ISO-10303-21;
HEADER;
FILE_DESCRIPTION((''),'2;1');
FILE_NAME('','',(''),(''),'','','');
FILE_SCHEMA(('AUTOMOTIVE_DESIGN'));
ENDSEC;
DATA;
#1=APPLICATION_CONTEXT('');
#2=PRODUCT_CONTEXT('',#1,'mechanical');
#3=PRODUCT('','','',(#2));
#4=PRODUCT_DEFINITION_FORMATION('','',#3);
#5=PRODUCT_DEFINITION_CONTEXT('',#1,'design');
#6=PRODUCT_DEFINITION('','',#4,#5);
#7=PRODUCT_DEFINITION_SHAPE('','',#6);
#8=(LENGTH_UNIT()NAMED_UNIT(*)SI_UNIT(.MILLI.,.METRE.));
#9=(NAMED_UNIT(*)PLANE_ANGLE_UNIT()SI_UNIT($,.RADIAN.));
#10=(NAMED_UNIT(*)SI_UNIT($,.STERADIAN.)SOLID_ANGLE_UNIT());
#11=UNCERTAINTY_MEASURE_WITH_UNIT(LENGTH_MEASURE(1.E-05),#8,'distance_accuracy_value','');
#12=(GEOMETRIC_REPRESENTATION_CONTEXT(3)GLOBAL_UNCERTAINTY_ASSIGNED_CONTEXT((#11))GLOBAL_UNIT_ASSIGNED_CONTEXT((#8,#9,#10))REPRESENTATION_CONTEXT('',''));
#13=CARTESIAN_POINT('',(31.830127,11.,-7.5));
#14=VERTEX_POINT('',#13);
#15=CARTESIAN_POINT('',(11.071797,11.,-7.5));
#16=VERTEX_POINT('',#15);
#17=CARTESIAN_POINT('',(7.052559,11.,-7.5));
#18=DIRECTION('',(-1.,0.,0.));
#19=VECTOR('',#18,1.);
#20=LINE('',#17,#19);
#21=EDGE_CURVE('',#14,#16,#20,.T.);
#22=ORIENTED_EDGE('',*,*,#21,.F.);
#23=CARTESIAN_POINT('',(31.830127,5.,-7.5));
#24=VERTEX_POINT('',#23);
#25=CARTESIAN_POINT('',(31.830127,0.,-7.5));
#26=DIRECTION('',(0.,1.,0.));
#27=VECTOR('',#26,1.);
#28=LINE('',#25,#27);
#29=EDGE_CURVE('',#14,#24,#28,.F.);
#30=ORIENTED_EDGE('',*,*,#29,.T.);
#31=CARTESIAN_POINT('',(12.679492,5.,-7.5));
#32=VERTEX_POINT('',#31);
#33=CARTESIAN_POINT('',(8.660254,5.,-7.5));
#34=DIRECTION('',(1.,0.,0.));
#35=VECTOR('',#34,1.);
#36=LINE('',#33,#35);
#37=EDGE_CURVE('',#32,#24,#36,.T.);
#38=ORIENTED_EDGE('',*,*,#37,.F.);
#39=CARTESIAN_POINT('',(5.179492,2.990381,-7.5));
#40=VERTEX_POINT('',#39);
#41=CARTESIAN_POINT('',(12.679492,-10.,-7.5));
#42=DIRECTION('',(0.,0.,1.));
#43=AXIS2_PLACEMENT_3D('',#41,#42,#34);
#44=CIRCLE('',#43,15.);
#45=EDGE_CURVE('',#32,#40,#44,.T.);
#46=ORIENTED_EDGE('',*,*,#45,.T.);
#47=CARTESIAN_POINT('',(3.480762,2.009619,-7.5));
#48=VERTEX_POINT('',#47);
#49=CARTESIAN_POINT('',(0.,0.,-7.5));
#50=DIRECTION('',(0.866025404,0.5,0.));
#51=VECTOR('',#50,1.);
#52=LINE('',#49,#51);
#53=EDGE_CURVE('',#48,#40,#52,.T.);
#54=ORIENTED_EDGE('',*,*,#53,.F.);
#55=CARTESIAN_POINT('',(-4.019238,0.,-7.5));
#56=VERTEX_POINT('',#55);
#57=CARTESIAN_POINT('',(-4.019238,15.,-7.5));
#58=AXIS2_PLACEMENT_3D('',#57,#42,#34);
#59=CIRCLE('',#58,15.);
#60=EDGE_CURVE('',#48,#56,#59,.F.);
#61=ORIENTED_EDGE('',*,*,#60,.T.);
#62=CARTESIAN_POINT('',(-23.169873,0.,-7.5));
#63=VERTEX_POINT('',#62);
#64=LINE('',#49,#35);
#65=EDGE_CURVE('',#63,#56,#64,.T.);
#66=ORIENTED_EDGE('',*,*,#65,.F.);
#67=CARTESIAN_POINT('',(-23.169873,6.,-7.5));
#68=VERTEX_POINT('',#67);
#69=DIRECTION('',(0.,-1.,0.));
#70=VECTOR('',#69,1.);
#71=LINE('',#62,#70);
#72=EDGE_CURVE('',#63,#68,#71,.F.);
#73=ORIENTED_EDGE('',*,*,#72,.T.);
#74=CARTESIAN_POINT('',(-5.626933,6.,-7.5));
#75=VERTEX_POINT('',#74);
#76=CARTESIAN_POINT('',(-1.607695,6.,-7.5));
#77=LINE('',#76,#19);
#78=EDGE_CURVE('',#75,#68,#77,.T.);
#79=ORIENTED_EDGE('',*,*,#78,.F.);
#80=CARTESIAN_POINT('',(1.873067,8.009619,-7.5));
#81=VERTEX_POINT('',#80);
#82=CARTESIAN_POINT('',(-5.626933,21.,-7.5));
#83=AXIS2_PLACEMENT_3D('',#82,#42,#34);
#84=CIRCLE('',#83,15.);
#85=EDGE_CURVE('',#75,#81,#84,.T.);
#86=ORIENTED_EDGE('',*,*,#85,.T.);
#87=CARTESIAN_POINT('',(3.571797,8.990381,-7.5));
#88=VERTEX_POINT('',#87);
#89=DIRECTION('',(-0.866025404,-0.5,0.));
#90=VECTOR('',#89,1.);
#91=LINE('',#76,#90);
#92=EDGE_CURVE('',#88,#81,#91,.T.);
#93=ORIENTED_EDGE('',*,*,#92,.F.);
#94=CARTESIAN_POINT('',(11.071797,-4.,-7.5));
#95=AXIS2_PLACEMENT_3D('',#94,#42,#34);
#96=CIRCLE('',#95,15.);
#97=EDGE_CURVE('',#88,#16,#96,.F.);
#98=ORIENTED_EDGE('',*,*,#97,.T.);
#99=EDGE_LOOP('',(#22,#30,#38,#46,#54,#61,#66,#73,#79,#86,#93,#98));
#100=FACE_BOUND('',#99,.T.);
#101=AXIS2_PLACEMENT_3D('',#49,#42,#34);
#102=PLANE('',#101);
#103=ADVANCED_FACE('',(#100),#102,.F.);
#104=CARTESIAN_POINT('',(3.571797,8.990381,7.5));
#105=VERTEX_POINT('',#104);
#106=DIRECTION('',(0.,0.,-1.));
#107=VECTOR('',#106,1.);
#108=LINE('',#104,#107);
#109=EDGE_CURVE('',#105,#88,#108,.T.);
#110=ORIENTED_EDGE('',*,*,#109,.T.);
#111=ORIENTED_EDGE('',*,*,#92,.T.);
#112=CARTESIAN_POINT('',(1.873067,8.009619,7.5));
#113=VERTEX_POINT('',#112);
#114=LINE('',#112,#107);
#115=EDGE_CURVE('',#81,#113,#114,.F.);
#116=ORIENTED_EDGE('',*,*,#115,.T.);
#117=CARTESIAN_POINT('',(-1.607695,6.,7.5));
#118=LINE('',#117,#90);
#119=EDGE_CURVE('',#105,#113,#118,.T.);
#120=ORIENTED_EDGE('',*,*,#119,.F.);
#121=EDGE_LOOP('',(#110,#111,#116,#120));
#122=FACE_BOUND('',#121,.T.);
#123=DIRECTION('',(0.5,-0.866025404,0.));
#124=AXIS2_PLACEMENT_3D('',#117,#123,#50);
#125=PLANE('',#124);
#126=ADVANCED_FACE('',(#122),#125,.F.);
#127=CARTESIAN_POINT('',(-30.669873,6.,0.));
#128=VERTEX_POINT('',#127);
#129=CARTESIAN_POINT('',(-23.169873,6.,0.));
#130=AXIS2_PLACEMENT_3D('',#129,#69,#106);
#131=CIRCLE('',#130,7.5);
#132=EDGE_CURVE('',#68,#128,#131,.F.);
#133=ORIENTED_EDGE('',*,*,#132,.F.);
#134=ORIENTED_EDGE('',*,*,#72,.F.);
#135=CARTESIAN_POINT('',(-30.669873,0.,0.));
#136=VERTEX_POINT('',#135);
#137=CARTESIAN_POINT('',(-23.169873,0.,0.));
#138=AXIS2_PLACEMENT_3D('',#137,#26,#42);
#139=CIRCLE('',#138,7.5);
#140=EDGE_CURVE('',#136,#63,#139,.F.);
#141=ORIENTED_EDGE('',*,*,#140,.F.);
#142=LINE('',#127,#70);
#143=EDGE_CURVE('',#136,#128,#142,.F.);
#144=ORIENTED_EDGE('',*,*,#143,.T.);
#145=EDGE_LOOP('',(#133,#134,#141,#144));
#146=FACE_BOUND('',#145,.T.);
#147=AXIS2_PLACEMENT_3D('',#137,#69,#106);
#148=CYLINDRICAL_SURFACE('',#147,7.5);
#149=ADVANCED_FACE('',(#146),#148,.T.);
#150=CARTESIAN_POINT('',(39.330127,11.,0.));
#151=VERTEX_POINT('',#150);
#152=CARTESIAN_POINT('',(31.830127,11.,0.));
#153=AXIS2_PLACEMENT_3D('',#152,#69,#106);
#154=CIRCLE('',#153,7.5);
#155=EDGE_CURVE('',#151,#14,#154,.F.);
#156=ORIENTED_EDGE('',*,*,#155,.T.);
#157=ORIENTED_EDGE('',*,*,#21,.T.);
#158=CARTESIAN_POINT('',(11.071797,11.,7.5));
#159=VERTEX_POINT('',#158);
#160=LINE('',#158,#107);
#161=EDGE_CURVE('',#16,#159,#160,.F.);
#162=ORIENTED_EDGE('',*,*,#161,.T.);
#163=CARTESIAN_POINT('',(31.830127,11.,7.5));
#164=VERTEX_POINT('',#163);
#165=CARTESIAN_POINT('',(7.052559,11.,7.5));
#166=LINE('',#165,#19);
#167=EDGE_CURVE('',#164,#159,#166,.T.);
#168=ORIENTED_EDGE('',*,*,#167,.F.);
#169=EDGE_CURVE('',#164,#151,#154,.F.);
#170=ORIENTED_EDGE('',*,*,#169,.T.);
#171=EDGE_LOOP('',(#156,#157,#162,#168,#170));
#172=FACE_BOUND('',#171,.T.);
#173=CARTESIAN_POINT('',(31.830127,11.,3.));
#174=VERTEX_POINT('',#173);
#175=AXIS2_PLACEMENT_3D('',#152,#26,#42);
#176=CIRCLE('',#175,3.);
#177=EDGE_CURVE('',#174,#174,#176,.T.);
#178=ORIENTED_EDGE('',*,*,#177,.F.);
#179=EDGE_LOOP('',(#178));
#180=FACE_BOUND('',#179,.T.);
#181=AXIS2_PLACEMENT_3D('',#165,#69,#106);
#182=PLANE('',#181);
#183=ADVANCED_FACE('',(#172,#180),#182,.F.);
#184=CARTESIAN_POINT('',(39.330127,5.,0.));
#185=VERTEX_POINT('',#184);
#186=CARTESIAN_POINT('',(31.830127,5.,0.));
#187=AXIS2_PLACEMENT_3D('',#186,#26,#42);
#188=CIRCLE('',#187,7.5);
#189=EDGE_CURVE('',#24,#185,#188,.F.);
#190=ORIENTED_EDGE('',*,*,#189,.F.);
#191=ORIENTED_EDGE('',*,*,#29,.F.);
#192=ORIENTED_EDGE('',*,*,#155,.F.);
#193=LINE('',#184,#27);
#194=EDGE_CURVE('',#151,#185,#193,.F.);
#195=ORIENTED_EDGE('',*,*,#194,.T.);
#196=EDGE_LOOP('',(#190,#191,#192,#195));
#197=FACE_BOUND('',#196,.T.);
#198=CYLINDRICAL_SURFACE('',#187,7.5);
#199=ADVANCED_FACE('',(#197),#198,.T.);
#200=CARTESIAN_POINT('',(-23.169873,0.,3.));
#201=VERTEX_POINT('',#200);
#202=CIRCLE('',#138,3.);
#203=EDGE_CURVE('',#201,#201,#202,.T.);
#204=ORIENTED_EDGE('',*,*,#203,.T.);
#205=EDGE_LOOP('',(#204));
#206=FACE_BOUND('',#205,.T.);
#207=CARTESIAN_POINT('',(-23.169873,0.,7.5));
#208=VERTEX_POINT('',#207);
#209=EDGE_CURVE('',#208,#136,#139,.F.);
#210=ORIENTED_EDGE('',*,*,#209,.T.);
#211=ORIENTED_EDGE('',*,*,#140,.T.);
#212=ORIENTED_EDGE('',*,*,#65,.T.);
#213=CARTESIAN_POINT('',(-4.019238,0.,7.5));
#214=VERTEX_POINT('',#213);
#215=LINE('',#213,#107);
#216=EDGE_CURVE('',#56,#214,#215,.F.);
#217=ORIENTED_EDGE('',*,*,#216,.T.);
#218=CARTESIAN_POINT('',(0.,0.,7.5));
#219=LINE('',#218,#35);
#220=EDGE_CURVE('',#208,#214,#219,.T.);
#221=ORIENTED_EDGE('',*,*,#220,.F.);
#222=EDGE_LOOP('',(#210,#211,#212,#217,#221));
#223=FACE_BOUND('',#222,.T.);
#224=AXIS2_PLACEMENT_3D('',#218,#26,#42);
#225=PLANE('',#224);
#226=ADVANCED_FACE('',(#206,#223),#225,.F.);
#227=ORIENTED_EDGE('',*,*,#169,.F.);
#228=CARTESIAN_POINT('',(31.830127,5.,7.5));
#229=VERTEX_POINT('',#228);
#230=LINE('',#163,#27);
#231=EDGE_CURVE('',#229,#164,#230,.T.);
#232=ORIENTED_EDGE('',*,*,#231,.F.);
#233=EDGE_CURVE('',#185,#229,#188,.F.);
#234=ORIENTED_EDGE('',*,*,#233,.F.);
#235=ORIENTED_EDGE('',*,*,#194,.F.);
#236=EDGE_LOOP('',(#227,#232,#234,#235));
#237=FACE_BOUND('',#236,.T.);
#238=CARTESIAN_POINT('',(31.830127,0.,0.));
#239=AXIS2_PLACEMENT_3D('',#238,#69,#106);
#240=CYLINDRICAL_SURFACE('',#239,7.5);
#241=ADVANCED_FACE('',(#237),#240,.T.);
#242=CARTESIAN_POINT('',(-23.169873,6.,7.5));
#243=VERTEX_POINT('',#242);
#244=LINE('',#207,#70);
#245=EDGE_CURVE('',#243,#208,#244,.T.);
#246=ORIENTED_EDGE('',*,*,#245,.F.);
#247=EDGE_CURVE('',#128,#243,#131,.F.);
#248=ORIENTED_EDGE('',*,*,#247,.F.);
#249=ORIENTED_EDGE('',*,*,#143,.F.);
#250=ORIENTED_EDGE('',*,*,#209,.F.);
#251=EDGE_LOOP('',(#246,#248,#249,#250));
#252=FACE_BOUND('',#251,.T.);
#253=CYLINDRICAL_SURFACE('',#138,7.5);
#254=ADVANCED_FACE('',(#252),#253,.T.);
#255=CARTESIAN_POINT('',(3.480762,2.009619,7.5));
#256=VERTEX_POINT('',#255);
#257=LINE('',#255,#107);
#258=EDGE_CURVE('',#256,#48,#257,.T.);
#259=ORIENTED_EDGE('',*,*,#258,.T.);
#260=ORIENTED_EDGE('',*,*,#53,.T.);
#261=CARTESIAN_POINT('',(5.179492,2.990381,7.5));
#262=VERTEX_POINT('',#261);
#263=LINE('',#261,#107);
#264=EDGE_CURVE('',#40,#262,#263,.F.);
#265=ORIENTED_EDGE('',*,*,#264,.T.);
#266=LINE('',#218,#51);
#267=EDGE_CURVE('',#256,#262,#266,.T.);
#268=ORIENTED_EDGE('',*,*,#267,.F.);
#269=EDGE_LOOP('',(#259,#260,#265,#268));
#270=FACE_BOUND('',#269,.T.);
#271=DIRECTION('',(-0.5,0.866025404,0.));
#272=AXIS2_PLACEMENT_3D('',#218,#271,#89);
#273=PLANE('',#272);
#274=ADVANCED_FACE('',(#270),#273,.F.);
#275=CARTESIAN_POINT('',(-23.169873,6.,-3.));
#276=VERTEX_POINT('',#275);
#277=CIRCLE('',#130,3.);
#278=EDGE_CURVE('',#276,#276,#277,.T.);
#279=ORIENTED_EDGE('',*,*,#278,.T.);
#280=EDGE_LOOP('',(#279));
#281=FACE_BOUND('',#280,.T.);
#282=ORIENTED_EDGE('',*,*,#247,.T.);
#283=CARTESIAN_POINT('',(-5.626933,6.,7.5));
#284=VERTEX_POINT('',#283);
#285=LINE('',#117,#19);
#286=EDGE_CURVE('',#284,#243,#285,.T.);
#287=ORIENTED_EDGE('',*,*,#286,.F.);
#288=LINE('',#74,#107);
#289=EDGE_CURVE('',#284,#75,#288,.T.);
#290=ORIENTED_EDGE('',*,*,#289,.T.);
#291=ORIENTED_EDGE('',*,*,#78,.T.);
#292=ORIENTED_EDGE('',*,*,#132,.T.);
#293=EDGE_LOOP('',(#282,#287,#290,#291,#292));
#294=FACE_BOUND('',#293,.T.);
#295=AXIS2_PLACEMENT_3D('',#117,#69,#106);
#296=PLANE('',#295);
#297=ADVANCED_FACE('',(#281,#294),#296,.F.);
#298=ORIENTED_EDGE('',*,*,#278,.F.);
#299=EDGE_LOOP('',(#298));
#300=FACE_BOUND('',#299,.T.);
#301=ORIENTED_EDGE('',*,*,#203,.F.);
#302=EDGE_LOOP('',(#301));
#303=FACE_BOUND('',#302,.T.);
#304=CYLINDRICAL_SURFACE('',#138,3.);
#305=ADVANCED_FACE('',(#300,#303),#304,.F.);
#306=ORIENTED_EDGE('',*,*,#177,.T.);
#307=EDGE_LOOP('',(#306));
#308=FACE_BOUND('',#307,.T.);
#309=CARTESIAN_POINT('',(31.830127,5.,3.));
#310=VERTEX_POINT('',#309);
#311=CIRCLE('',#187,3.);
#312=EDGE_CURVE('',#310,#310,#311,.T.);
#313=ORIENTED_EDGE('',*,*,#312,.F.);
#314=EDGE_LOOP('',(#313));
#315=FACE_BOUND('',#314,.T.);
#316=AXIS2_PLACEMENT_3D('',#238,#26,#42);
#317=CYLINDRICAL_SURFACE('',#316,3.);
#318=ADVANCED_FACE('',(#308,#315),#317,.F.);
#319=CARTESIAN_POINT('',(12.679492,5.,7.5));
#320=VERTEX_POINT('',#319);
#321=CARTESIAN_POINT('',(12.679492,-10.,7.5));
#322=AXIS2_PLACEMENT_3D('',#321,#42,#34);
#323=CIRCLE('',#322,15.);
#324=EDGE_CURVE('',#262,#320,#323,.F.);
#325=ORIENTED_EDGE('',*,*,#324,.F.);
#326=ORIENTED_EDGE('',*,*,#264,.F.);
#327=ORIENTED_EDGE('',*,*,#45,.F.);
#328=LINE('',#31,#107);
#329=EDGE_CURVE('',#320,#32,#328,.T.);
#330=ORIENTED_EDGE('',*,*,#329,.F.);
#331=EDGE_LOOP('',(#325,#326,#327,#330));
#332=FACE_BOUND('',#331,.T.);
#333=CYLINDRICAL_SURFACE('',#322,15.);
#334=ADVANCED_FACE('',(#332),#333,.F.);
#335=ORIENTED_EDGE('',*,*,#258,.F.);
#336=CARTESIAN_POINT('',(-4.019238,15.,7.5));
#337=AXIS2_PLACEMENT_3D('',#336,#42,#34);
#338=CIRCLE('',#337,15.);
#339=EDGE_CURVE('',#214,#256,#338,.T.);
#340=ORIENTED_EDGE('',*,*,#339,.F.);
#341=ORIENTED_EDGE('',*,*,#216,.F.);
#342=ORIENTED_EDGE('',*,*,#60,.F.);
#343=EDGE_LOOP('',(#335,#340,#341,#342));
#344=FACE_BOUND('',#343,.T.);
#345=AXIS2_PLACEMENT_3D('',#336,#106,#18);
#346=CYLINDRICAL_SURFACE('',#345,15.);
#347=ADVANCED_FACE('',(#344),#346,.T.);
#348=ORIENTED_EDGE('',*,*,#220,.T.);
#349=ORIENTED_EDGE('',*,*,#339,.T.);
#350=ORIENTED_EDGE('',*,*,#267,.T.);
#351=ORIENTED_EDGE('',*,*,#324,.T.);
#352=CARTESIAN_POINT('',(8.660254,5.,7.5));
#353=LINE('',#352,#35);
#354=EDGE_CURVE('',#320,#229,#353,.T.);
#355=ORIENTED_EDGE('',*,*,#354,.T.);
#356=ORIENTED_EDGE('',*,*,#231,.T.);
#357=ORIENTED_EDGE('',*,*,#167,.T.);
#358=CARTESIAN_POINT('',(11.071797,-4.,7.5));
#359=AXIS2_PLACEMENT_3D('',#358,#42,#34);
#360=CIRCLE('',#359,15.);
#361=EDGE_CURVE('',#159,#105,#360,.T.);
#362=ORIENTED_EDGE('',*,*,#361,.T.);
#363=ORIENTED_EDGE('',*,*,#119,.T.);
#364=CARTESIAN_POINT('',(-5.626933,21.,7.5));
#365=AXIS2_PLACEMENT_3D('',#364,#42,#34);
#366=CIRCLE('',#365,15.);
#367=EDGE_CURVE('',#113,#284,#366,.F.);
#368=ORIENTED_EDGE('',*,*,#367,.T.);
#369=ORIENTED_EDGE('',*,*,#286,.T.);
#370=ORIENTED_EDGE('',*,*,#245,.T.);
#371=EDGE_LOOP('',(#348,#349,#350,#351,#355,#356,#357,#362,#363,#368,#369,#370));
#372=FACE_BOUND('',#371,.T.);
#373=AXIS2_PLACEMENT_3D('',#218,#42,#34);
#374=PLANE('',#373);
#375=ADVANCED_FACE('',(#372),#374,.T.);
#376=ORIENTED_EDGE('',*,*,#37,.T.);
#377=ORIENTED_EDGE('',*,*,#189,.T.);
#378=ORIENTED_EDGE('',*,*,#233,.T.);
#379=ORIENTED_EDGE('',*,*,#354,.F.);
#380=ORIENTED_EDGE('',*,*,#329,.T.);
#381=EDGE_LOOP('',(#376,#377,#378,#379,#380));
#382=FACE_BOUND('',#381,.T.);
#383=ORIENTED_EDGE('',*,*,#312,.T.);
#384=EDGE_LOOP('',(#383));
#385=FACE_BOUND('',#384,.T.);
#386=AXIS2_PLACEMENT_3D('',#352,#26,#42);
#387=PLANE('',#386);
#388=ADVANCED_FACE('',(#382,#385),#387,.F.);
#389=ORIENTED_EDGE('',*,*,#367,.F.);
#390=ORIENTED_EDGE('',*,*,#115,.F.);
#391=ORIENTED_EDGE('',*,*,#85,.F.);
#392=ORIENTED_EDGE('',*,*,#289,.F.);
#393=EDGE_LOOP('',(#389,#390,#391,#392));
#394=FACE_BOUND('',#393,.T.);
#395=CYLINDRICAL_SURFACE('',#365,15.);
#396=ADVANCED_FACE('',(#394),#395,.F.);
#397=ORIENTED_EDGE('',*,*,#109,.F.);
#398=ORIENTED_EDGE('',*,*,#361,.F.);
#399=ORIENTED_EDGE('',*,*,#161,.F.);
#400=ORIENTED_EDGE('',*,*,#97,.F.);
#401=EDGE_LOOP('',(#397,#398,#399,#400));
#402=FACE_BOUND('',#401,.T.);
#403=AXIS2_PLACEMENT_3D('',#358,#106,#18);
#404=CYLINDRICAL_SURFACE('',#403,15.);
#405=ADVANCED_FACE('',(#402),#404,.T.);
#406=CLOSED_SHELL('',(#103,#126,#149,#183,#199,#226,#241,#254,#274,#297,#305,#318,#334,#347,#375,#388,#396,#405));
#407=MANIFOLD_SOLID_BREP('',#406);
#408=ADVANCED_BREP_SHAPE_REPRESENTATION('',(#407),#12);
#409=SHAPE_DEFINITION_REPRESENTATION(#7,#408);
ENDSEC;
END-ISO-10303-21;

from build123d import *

# Parameters (mm, degrees)
SALIENTE_EXTRUIR1_DEPTH    = 7.5
REDONDEO1_R                = 15
REDONDEO2_R                = 7.5
CORTAR_EXTRUIR1_DEPTH      = 41.485909788
CORTAR_EXTRUIR1_DEPTH_BACK = 41.485909788
CROQUIS2_R                 = 3


with BuildPart() as part:
    # Croquis1 → Saliente-Extruir1 (new, symmetric)
    with BuildSketch(Plane.XY):
        Polygon((0, 0), (-30.669872981, 0), (-30.669872981, 6), (-1.607695155, 6), (7.052558883, 11), (39.330127019, 11), (39.330127019, 5), (8.660254038, 5), align=None)
    extrude(amount=SALIENTE_EXTRUIR1_DEPTH, both=True)

    # Redondeo1
    redondeo1_edges = [part.edges().sort_by_distance(p)[0] for p in [
        (0, 0, 0),
        (-1.607695155, 6, 0),
        (7.052558883, 11, 0),
        (8.660254038, 5, 0),
    ]]
    fillet(redondeo1_edges, radius=REDONDEO1_R)

    # Redondeo2
    redondeo2_edges = [part.edges().sort_by_distance(p)[0] for p in [
        (-30.669872981, 3, -7.5),
        (-30.669872981, 3, 7.5),
        (39.330127019, 8, -7.5),
        (39.330127019, 8, 7.5),
    ]]
    fillet(redondeo2_edges, radius=REDONDEO2_R - 0.0001)  # a hair under: the kernel refuses the full size

    # Croquis2 → Cortar-Extruir1 (cut, two sides: drawn at the far end of the back side and taken through both)
    with BuildSketch(Plane(origin=(0, 6, 0), x_dir=(1, 0, 0), z_dir=(0, 1, 0)).offset(-CORTAR_EXTRUIR1_DEPTH_BACK)):
        with Locations(Location((-23.169872981, 0, 0), (0, 0, 270))):
            Circle(CROQUIS2_R)
        with Locations(Location((31.830127019, 0, 0), (0, 0, 270))):
            Circle(CROQUIS2_R)
    extrude(amount=CORTAR_EXTRUIR1_DEPTH + CORTAR_EXTRUIR1_DEPTH_BACK, mode=Mode.SUBTRACT)


solid = part.part
